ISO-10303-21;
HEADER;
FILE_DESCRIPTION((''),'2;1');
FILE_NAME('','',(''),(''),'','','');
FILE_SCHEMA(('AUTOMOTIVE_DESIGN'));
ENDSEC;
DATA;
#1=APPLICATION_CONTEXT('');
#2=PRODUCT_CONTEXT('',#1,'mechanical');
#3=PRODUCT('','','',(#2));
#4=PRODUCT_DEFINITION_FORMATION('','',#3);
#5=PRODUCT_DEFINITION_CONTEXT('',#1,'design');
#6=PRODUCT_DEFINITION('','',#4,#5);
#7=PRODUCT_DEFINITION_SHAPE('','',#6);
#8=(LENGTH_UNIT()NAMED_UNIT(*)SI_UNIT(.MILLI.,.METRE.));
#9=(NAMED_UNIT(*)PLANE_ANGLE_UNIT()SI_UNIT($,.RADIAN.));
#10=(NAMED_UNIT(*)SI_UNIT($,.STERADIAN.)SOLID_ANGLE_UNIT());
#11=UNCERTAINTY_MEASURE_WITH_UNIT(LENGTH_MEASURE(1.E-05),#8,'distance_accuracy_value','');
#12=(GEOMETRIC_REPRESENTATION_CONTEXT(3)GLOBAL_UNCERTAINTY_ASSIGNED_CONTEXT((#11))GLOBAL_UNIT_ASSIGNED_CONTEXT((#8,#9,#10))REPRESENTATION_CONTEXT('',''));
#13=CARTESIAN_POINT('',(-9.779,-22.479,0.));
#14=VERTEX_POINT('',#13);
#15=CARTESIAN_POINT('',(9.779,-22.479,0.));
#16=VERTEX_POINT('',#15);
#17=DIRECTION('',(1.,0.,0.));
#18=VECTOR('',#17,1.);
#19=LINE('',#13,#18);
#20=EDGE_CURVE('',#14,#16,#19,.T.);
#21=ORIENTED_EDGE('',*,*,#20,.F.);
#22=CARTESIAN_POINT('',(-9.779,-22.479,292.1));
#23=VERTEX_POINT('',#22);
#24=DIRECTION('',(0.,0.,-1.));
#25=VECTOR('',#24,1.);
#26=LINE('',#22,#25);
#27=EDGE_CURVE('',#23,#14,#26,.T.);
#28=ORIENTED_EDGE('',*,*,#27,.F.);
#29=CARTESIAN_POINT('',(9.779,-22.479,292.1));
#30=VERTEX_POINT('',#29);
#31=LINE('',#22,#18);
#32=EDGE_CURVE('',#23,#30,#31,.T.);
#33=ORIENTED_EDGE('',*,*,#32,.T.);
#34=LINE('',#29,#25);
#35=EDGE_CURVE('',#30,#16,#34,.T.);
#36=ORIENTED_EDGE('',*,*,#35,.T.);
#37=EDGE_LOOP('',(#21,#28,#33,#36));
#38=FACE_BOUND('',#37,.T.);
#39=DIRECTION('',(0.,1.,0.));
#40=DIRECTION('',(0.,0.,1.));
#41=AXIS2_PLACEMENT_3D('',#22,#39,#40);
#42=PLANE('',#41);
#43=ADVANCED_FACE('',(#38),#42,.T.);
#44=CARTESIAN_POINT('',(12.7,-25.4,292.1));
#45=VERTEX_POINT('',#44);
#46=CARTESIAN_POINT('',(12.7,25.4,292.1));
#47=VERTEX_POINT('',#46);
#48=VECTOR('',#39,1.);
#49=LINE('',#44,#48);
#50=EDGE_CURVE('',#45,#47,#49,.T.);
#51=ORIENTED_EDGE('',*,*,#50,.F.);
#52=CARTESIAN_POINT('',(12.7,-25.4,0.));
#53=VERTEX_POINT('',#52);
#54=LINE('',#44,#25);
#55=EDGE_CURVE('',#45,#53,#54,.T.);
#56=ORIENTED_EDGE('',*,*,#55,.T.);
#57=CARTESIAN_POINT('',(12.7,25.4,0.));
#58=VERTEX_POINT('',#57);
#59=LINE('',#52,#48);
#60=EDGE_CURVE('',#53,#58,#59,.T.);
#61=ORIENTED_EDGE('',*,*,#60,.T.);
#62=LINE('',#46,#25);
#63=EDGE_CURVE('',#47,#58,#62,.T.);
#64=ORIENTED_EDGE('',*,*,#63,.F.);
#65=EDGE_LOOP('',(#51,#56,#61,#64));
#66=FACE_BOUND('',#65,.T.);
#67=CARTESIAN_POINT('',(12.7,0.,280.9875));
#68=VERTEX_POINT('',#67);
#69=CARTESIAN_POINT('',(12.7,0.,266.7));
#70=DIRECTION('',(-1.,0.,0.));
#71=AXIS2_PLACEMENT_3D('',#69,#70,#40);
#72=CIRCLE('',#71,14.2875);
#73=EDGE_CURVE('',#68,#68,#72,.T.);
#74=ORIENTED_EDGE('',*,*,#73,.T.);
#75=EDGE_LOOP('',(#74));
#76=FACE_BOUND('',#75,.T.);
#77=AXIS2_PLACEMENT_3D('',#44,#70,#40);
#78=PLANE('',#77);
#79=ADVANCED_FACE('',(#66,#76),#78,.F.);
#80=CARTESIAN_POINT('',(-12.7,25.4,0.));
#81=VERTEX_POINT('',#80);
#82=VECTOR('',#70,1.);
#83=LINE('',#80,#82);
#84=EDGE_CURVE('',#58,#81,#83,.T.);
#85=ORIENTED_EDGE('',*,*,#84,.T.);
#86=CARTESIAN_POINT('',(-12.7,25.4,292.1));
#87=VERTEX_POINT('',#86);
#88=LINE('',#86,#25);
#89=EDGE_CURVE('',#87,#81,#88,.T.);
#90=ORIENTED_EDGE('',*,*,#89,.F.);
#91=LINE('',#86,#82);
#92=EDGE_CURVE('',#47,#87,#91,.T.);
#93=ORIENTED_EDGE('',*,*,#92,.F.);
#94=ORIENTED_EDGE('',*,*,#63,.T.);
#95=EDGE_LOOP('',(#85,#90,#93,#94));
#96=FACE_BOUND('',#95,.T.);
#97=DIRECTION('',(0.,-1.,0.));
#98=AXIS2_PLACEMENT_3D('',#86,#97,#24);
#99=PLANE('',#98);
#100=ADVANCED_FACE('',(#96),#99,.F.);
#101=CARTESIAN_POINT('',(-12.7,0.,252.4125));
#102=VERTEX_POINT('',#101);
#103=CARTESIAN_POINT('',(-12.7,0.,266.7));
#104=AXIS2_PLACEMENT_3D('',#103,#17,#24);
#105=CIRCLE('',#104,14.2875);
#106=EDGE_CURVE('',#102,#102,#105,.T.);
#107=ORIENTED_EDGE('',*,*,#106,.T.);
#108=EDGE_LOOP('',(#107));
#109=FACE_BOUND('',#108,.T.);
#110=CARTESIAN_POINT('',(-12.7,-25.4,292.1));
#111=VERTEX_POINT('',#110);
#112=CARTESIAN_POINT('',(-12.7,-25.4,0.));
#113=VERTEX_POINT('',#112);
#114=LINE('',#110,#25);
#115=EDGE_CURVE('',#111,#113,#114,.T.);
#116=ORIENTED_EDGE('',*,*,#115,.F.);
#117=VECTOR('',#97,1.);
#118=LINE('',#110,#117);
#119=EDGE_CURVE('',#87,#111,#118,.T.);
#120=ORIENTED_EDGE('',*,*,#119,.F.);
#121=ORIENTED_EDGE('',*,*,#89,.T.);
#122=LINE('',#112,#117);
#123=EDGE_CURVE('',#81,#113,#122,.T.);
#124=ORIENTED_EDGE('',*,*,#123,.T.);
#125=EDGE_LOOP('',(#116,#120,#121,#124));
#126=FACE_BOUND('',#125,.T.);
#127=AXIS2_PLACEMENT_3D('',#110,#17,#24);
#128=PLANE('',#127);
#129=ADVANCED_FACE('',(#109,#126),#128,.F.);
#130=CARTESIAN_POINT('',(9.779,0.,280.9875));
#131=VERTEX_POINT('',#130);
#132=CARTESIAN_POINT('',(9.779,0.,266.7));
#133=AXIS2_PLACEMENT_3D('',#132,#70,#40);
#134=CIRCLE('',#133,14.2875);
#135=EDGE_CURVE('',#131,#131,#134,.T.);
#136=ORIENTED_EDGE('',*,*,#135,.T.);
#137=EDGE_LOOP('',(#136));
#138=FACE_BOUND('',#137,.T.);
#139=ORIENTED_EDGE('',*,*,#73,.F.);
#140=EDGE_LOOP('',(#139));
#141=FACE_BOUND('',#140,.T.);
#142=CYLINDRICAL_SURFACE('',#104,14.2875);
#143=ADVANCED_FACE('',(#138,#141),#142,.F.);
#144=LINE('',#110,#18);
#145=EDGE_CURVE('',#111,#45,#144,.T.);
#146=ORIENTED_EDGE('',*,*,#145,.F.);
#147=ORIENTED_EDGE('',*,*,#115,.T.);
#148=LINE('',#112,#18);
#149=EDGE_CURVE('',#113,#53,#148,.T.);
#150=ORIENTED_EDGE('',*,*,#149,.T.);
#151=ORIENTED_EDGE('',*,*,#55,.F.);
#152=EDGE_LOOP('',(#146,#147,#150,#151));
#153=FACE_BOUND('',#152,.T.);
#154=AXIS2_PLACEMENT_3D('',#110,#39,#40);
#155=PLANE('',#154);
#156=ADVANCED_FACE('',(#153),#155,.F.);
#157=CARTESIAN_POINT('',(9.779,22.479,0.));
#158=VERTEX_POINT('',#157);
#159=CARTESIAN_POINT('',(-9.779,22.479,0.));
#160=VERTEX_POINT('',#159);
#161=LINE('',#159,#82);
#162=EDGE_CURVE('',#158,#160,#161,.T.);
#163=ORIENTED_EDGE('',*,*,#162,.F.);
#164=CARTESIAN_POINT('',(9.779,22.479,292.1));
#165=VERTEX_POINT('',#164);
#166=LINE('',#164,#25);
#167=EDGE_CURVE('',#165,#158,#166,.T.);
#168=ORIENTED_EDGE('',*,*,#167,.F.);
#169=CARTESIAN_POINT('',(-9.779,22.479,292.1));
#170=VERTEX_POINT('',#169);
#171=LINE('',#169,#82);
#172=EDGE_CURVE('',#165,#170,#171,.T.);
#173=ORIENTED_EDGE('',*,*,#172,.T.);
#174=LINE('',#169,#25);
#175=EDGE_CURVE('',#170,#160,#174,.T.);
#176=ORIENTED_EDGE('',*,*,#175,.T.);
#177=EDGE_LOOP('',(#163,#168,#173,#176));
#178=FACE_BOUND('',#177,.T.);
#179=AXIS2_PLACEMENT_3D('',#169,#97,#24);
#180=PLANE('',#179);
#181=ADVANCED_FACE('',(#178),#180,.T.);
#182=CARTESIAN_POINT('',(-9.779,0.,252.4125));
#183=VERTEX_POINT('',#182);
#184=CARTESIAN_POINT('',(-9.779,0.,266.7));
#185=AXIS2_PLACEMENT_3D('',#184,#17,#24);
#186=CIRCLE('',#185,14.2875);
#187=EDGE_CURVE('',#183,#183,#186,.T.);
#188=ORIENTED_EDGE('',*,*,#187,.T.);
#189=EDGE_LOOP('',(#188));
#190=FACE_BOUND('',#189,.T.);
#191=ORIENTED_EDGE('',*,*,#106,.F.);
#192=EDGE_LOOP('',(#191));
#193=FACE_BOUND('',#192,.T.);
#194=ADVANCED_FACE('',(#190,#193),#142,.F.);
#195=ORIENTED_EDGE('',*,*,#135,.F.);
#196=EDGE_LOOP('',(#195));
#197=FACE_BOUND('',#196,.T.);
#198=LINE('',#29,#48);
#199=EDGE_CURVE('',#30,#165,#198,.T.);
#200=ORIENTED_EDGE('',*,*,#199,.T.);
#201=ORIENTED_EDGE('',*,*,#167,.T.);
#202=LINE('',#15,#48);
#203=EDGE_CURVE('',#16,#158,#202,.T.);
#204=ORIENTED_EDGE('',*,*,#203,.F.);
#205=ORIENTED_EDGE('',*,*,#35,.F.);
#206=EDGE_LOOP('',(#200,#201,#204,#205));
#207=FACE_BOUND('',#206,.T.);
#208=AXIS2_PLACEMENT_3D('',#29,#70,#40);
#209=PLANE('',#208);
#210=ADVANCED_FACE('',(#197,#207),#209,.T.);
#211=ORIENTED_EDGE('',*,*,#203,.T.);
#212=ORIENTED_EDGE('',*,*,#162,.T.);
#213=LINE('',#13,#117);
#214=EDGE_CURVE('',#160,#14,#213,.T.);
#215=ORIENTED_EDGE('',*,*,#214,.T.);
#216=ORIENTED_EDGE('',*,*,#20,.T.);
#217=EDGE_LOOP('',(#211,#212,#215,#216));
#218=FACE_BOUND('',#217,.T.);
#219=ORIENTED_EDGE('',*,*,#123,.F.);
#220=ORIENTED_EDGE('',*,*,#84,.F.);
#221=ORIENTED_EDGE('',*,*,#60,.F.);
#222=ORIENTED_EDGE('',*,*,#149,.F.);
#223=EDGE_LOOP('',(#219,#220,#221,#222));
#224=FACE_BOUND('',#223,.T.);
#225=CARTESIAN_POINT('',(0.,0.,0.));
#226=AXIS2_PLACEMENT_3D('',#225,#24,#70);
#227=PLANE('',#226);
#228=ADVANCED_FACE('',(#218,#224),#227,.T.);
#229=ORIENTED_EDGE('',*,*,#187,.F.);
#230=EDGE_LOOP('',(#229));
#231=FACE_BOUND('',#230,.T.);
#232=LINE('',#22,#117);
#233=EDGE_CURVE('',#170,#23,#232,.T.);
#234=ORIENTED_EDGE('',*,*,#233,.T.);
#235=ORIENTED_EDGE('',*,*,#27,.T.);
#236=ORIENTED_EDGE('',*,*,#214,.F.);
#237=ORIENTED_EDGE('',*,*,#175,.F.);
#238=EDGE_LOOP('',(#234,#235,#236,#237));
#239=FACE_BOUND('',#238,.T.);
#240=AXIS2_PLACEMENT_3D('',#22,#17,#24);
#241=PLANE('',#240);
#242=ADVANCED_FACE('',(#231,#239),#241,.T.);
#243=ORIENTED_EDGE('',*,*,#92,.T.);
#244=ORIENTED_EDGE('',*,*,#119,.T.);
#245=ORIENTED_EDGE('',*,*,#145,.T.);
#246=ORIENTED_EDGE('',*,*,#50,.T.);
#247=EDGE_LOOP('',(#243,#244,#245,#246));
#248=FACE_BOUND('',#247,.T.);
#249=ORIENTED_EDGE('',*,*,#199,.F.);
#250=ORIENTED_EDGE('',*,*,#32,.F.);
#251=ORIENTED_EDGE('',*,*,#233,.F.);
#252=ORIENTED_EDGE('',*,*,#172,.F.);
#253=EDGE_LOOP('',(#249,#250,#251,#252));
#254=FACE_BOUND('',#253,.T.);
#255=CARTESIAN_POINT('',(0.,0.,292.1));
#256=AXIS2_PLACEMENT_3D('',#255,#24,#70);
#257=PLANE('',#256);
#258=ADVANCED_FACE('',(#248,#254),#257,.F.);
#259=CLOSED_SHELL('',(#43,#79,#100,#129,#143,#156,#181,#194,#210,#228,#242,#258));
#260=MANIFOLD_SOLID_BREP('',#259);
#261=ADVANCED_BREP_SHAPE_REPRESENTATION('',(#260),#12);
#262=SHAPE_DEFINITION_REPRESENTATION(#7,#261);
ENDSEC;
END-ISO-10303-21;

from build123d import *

# Parameters (mm, degrees)
F_2X1_BLANK_EXTRUSION_OUTLINE_W   = 25.4
F_2X1_BLANK_EXTRUSION_OUTLINE_H   = 50.8
F_2X1_BLANK_EXTRUSION_OUTLINE_W_2 = 19.558
F_2X1_BLANK_EXTRUSION_OUTLINE_H_2 = 44.958
F_2X1_BLANK_EXTRUSION_DEPTH       = 292.1
CUT_EXTRUDE1_DEPTH                = 295.300407747
CUT_EXTRUDE1_DEPTH_BACK           = 295.300407747
SKETCH1_R                         = 14.2875


# Read off the part's stored shape, not the designer's step: 2x1 blank extrusion
with BuildPart() as part:
    # 2x1 blank extrusion outline → 2x1 blank extrusion (new body)
    with BuildSketch(Plane.XY):
        Rectangle(F_2X1_BLANK_EXTRUSION_OUTLINE_W, F_2X1_BLANK_EXTRUSION_OUTLINE_H)
        Rectangle(F_2X1_BLANK_EXTRUSION_OUTLINE_W_2, F_2X1_BLANK_EXTRUSION_OUTLINE_H_2, mode=Mode.SUBTRACT)
    extrude(amount=F_2X1_BLANK_EXTRUSION_DEPTH)

    # Sketch1 → Cut-Extrude1 (cut, two sides: drawn at the far end of the back side and taken through both)
    with BuildSketch(Plane(origin=(12.7, 0, 0), x_dir=(0, 0, -1), z_dir=(1, 0, 0)).offset(-CUT_EXTRUDE1_DEPTH_BACK)):
        with Locations(Location((-266.7, 0, 0), (0, 0, 180))):
            Circle(SKETCH1_R)
    extrude(amount=CUT_EXTRUDE1_DEPTH + CUT_EXTRUDE1_DEPTH_BACK, mode=Mode.SUBTRACT)


solid = part.part
